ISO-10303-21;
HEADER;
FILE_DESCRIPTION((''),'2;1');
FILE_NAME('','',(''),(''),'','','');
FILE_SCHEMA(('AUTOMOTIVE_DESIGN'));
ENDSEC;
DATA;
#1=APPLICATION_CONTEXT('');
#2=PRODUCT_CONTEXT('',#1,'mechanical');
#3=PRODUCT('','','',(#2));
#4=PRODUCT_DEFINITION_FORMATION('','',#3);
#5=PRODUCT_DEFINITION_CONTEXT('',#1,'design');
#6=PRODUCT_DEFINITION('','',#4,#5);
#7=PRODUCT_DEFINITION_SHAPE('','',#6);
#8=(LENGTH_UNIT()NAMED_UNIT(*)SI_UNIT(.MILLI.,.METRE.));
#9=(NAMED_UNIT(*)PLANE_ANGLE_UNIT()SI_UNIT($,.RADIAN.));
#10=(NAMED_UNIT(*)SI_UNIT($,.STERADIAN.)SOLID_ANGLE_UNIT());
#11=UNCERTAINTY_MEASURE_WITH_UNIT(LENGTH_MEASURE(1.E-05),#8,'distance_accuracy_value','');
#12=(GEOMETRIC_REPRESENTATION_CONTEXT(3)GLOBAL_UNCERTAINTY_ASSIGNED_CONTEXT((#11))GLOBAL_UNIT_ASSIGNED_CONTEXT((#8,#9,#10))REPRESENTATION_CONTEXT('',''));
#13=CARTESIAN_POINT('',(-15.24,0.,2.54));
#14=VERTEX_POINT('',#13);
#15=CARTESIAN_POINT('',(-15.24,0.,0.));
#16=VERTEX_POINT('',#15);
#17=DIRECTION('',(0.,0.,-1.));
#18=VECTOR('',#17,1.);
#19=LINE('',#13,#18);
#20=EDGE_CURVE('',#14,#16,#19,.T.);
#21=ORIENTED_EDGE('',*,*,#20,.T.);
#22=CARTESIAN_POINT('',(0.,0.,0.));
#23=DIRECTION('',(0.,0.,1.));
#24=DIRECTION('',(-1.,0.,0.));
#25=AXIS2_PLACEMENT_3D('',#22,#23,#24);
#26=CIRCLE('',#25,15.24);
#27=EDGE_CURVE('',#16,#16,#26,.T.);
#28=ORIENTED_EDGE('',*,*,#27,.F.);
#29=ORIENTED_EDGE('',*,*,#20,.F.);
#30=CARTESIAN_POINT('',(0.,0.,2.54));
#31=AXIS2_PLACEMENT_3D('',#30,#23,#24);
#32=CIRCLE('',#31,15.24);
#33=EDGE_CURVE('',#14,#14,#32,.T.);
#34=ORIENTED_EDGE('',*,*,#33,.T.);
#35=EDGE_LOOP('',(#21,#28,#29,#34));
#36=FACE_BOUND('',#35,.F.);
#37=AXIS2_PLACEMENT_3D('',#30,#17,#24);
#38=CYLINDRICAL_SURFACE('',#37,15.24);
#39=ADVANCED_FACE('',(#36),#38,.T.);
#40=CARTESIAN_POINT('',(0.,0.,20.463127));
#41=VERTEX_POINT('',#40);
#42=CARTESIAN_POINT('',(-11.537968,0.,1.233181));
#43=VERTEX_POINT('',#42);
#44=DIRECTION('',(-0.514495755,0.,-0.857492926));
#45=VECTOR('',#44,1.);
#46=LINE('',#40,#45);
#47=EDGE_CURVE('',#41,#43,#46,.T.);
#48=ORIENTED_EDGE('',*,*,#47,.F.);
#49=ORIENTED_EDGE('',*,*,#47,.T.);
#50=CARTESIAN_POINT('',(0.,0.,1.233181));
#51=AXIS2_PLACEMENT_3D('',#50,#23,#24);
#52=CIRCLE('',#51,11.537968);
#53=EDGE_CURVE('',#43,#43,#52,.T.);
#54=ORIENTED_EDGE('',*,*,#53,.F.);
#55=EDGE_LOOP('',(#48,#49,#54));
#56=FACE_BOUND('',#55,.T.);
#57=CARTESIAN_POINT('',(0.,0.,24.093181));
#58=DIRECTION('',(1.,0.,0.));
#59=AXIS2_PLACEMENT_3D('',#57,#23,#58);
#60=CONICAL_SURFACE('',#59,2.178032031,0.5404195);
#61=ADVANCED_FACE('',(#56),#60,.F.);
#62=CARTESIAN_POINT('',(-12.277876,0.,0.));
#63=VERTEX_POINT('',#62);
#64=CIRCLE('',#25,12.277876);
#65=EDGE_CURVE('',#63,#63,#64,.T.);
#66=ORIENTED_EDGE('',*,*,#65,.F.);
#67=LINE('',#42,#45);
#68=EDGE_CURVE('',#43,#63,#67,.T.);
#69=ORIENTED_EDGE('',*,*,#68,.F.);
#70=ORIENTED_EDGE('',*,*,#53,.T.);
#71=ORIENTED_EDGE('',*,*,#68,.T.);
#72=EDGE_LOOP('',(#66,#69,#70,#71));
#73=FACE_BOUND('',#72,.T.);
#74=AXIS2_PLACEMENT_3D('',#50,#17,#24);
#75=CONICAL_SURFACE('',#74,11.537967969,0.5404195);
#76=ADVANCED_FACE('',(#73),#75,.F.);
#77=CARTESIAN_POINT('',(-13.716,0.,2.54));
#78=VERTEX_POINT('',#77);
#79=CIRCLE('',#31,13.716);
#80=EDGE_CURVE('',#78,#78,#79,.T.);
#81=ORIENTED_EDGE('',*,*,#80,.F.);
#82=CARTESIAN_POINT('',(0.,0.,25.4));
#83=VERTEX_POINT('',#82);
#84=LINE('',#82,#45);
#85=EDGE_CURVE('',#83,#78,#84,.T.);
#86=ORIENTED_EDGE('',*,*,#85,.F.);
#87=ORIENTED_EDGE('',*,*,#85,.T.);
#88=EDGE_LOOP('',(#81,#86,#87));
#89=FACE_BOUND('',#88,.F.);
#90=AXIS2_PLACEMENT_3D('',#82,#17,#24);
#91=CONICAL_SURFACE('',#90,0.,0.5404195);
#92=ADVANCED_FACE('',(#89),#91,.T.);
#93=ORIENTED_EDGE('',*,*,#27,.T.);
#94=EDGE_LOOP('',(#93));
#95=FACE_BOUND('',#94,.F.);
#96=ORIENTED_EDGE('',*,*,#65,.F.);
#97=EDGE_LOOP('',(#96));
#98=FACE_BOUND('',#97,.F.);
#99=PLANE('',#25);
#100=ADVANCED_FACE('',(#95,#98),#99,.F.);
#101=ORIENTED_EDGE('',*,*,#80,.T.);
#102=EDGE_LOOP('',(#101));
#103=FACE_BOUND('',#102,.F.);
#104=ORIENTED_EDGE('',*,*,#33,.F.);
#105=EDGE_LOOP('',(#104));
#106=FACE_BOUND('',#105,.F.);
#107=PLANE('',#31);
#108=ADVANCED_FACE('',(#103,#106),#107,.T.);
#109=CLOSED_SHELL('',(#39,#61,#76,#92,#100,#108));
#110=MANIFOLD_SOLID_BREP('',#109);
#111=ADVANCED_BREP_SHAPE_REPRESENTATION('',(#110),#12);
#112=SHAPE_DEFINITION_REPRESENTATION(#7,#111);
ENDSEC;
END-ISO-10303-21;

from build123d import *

# Parameters (mm, degrees)
F2_T = 2.54


# Not quite as in the source:
# - a shell that OpenCascade refuses in one call is made with other operations: the cavity is built on its own and cut out


with BuildPart() as f1:
    # F0 (on Front) → F1 (revolve)
    with BuildSketch(Plane.XZ):
        Polygon((-15.24, 0), (0, 0), (0, 2.54), (-13.716, 2.54), align=None)
        Polygon((-13.716, 2.54), (0, 2.54), (0, 25.4), align=None)
        Polygon((-15.24, 2.54), (-15.24, 0), (-13.716, 2.54), align=None)
    revolve(axis=Axis((0, 0, 12.7), (0, 0, 1)))

    # F2: shell of thickness 2.54, made by hand


with BuildPart() as f2_core1:
    # F2_t2: copy of F1
    add(f1.part)

    # the walls: a layer under each face that stays
    f2_faces = [f2_core1.faces().sort_by_distance(p)[0] for p in [
        (6.858, 0, 13.97),
        (-10.16, 10.16, 2.54),
        (15.24, 0, 1.27),
    ]]
    thicken(f2_faces, amount=-F2_T, mode=Mode.SUBTRACT)

    # F2_s3 → F2_t4 (revolve, cut)
    with BuildSketch(Plane.XZ):
        Polygon((-13.7377803203, 2.5784681922), (-11.5379679687, 1.2331807812), (-12.2778764374, 0), (-13.716, 0), align=None)
    revolve(axis=Axis((0, 0, 2.54), (0, 0, 1)), mode=Mode.SUBTRACT)


with BuildPart() as f1_1:
    add(f1.part)

    # what is left inside the walls is the cavity
    f2_cavity = [f2_core1.part.solids().sort_by_distance(p)[0] for p in [
        (3.824209, 0, 14.040077),
    ]]
    add(f2_cavity, mode=Mode.SUBTRACT)


solid = f1_1.part
